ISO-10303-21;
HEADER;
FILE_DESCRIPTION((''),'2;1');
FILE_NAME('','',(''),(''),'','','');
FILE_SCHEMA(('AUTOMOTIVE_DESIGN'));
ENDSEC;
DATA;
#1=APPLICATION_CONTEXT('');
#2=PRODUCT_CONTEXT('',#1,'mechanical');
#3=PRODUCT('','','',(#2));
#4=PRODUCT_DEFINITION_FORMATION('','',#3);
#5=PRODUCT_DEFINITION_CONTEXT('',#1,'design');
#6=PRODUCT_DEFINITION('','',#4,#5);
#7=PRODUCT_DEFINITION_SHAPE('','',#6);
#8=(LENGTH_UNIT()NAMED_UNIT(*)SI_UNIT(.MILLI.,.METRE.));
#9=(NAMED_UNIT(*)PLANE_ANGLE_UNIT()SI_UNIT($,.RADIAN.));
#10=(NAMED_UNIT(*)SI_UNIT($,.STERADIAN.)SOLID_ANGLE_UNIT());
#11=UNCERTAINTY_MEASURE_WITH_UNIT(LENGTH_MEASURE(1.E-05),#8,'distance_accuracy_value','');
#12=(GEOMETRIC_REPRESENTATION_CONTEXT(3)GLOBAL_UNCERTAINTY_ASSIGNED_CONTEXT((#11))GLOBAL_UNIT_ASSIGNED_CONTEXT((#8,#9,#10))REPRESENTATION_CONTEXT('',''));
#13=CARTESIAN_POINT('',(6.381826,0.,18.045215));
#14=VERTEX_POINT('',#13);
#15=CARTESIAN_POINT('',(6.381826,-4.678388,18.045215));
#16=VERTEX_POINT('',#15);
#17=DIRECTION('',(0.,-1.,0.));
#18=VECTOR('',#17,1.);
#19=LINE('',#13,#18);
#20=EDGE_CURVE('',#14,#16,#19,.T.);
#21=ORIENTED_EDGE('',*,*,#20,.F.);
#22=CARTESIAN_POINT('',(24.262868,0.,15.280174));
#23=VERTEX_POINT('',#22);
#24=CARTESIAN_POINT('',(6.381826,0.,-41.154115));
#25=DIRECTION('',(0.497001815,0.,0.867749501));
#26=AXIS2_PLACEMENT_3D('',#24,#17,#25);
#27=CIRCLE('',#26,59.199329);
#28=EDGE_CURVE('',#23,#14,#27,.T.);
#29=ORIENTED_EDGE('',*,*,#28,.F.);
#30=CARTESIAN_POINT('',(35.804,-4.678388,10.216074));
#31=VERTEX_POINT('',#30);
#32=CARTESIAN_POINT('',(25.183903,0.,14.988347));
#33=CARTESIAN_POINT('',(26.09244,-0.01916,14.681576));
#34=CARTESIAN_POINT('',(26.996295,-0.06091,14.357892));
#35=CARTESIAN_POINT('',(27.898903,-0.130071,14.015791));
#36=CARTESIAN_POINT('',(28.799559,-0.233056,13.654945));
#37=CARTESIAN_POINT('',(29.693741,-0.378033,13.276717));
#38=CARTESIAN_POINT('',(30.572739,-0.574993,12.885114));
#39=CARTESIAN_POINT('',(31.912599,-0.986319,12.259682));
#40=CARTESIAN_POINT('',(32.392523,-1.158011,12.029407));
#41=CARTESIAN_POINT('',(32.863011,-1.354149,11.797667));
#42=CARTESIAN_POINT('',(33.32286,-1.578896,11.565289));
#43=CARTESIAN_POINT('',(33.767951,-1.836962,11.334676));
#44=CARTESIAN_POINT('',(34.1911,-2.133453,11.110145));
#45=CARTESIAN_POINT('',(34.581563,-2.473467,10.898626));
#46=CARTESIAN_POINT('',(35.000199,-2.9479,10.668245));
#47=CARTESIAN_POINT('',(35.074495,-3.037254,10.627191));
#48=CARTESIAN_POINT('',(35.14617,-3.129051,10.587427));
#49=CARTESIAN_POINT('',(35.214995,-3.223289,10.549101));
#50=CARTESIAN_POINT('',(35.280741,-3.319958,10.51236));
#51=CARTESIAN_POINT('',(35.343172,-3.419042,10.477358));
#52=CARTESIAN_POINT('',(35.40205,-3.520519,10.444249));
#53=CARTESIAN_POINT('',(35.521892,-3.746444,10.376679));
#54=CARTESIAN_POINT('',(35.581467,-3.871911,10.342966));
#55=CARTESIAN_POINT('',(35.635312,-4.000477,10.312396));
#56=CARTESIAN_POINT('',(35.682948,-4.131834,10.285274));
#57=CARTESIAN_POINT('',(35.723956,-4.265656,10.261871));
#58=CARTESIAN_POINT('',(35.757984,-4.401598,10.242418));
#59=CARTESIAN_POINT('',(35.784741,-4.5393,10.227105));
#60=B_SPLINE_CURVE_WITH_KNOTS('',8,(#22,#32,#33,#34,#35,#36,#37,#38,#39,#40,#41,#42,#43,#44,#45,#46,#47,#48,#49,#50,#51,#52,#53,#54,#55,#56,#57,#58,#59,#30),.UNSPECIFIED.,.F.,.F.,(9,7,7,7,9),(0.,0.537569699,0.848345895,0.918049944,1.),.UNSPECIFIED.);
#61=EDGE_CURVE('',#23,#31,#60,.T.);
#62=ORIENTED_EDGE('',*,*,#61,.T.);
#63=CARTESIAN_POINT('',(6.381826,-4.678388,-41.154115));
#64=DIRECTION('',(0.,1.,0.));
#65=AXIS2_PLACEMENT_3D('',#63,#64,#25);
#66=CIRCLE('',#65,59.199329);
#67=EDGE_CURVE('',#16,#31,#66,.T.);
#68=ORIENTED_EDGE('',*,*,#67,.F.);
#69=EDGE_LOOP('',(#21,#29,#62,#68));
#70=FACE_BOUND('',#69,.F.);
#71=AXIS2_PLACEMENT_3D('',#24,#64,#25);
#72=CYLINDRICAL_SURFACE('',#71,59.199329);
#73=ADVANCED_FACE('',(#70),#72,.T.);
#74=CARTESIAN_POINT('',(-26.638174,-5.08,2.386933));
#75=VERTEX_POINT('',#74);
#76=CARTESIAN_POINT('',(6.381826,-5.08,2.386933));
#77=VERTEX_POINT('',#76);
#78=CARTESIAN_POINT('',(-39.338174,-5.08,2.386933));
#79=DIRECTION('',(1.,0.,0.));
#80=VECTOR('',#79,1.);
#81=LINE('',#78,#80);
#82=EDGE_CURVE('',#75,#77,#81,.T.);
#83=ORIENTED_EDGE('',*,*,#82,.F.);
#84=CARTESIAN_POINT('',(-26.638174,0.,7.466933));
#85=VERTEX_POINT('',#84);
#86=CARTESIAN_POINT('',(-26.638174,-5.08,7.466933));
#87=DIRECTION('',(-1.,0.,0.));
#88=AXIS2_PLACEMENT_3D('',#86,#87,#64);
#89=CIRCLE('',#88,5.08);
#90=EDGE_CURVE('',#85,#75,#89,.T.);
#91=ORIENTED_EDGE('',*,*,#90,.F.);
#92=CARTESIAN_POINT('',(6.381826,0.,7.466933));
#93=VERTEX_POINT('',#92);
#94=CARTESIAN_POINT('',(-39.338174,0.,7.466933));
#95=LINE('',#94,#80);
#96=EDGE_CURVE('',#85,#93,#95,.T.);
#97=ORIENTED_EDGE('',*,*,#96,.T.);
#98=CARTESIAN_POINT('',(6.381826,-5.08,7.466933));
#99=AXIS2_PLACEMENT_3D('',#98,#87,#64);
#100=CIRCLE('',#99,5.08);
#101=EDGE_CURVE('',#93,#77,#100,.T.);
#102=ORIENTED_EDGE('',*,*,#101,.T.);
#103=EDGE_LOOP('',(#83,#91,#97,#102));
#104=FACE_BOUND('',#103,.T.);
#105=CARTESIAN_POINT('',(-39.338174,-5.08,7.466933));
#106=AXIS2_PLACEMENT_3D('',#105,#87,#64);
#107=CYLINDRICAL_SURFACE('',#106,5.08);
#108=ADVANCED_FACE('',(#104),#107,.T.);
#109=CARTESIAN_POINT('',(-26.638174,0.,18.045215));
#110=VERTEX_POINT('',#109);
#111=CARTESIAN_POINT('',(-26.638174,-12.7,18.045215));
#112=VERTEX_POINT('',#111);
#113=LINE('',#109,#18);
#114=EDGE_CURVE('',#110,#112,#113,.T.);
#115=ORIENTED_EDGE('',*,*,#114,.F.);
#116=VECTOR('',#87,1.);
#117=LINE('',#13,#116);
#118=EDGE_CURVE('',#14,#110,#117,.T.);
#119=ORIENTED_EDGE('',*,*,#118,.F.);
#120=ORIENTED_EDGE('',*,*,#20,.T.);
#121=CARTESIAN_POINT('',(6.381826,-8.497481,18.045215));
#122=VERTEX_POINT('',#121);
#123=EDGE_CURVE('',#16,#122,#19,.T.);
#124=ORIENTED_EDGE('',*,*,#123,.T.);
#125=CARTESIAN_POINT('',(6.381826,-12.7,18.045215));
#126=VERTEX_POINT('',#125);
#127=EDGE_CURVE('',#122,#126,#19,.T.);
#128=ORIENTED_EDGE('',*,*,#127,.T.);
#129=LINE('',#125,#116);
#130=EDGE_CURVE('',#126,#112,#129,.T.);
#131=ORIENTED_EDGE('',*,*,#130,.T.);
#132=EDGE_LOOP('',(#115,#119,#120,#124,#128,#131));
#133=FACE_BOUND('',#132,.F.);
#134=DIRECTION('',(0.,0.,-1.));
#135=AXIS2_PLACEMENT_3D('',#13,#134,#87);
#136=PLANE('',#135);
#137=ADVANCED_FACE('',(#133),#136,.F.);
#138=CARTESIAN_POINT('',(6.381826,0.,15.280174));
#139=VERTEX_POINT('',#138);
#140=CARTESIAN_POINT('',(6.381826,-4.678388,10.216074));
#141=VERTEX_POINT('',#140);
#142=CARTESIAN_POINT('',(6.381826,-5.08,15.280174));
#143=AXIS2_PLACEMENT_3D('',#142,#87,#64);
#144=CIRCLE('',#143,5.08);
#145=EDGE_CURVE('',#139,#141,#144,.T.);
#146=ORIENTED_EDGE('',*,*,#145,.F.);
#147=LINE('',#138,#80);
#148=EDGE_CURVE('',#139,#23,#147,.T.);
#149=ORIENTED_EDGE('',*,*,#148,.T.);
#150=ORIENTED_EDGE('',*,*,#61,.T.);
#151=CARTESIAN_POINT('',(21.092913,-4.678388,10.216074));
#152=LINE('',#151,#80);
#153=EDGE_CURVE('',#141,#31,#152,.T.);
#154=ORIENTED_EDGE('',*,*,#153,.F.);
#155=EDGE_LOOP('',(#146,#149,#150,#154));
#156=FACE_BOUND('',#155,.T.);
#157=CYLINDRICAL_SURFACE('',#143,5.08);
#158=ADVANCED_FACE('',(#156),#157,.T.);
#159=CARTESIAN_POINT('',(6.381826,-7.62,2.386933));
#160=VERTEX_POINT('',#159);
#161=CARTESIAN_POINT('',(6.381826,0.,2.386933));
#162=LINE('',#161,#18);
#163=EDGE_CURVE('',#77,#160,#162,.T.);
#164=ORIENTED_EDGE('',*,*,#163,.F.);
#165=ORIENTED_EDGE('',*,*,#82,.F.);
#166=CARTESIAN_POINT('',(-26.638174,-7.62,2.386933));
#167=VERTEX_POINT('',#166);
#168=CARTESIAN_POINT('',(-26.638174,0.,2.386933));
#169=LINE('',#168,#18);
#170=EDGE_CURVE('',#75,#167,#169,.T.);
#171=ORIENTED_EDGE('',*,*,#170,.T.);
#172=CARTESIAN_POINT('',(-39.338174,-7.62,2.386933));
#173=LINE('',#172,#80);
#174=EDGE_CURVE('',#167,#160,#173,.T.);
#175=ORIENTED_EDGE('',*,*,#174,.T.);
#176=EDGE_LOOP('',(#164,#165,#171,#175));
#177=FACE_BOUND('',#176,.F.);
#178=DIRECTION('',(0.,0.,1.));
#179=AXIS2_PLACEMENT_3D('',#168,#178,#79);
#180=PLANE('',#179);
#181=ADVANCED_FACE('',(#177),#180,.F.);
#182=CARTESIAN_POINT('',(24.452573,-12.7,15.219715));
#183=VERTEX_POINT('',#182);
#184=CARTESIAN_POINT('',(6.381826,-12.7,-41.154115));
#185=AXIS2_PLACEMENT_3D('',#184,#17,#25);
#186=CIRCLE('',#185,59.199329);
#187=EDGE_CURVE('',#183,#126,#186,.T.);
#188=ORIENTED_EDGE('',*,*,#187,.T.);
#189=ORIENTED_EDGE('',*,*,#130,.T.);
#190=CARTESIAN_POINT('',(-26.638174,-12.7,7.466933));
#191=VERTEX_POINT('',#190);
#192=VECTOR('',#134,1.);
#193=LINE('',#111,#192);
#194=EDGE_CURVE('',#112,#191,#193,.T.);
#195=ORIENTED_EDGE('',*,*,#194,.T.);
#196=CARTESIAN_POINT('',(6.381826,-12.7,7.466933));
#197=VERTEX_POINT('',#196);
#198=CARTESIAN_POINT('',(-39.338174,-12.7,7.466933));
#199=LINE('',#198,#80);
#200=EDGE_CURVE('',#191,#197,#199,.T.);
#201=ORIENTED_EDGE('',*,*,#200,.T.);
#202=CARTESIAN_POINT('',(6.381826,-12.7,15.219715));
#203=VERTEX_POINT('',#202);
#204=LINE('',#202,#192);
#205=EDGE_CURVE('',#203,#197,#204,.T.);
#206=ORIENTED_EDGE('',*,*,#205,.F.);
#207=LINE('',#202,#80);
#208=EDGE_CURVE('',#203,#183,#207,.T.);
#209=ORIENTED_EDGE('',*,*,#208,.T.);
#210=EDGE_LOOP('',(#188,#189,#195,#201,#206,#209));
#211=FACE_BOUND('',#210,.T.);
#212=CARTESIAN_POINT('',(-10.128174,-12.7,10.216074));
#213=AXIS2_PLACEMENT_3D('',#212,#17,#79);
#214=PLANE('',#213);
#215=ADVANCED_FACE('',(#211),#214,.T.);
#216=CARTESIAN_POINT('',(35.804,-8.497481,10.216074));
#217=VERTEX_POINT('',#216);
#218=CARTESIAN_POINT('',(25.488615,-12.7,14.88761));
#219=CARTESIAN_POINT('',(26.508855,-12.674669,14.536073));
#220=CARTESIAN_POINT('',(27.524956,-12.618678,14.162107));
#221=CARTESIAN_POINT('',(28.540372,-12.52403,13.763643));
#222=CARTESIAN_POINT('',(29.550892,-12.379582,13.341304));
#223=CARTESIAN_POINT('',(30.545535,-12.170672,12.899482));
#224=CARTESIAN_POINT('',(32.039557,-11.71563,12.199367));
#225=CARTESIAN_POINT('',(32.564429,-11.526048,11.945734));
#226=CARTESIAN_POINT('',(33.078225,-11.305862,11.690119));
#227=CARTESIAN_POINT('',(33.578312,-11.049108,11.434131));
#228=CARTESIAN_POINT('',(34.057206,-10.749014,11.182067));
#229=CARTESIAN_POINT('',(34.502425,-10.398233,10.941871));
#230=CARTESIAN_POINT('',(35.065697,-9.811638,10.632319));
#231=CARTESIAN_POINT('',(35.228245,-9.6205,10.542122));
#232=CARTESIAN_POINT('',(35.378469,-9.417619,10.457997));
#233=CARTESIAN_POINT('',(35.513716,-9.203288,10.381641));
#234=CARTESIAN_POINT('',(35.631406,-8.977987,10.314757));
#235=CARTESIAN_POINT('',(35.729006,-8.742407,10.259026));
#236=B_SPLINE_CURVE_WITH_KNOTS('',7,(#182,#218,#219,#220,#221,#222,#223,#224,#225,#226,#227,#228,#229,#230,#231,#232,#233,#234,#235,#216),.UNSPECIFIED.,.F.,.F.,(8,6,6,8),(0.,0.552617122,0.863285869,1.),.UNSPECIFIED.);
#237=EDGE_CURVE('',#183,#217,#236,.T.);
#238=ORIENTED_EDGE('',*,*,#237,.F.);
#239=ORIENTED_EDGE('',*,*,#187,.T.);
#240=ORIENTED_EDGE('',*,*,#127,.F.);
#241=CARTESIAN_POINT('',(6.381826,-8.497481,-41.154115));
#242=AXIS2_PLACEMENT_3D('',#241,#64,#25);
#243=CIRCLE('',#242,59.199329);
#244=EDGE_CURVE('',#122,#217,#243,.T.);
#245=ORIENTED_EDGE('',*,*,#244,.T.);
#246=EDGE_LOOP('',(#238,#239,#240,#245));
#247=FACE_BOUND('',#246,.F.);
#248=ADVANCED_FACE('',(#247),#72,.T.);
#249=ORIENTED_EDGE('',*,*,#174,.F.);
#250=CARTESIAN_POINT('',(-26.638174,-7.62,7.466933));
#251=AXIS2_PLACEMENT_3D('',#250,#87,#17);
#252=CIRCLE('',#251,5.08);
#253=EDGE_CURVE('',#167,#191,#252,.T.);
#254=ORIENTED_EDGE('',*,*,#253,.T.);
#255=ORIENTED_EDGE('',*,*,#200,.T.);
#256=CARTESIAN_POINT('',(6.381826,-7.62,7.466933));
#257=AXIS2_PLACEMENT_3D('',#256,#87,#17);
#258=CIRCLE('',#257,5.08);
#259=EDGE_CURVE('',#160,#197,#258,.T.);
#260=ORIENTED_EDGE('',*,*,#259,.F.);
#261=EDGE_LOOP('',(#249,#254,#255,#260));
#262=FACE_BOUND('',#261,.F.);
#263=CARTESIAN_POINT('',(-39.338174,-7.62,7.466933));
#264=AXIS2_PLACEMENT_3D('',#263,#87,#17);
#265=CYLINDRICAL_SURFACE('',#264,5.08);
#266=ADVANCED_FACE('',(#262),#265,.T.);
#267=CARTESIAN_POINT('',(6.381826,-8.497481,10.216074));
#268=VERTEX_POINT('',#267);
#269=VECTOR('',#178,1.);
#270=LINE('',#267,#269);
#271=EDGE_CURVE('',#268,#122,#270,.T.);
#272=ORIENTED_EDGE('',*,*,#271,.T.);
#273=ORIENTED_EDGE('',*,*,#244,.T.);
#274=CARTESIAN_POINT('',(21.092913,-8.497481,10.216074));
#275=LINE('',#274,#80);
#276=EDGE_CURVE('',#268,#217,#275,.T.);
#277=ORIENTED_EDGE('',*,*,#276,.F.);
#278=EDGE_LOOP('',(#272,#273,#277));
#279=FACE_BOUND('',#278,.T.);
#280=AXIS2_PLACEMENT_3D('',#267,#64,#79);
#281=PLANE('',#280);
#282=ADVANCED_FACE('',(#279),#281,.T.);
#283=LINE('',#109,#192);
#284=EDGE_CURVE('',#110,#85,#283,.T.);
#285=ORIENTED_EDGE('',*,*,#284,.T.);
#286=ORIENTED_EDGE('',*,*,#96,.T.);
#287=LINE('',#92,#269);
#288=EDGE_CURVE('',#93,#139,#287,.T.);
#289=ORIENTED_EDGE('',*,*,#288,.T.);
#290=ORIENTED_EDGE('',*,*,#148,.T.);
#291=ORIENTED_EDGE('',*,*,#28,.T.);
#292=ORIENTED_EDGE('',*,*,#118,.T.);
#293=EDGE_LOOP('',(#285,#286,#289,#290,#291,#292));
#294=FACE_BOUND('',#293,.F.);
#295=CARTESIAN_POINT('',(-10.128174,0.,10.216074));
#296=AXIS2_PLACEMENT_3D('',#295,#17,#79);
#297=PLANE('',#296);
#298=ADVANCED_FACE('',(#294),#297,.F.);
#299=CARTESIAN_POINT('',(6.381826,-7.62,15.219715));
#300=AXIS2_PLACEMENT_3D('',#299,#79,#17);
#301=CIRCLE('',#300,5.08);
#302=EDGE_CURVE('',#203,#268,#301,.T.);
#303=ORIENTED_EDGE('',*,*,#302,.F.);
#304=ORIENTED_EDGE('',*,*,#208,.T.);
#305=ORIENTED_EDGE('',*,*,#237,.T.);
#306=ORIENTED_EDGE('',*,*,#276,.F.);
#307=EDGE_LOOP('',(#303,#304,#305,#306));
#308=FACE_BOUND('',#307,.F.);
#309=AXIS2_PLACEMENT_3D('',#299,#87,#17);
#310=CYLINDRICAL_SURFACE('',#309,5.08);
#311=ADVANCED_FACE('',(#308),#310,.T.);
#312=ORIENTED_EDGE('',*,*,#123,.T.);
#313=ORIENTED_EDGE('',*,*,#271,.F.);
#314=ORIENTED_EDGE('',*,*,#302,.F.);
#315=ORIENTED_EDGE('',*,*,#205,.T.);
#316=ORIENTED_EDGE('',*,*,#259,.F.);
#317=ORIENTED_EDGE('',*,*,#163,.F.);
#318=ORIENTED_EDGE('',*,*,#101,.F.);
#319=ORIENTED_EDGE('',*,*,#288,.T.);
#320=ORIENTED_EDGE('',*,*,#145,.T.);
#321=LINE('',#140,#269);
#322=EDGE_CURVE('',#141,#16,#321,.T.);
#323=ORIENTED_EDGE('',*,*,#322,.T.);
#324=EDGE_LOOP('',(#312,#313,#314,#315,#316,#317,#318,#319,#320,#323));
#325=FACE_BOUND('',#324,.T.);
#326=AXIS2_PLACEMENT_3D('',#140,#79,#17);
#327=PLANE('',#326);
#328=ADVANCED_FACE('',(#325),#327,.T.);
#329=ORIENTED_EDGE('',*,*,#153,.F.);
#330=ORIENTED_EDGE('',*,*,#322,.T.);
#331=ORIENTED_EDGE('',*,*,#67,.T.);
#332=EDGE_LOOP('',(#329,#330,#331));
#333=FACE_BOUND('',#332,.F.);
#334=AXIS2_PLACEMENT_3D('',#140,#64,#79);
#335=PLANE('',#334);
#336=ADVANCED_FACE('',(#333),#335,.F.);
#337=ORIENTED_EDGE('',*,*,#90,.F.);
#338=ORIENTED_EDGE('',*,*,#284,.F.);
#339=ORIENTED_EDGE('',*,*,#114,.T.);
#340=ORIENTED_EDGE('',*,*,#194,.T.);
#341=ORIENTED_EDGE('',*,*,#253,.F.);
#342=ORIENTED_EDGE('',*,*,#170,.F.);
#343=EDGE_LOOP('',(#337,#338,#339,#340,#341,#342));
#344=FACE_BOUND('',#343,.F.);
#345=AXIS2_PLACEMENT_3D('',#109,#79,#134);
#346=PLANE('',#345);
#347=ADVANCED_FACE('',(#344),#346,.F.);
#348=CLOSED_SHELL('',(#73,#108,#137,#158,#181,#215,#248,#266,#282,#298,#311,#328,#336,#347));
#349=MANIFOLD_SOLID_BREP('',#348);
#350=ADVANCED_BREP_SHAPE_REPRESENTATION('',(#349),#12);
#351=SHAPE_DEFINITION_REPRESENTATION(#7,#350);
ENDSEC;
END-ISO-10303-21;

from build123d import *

# Parameters (mm, degrees)
F1_DEPTH    = 12.7
F2_W        = 29.4221741813
F2_H        = 3.8190931082
F3_DEPTH    = 25.4
F4_T1_DEPTH = 58.42
F4_T3_DEPTH = 41.9312775373
F4_T5_DEPTH = 42.0824239574


# Not quite as in the source:
# - a fillet or chamfer that OpenCascade refuses, or shapes differently, is made with other operations: its cross-section is extruded or revolved along the edge and cut away or added


with BuildPart() as f1:
    # F0 (on Front) → F1 (new body)
    with BuildSketch(Plane.XZ):
        Polygon((6.3818255705, 18.0452149361), (-26.6381744295, 18.0452149361), (-26.6381744295, 2.3869331926), (6.3818255705, 2.3869331926), (6.3818255705, 10.2160740644), align=None)
        with BuildLine():
            ThreePointArc((35.8039997518, 10.2160740644), (21.6048326678, 16.0544570681), (6.3818255705, 18.0452149361))
            Line((6.3818255705, 18.0452149361), (6.3818255705, 10.2160740644))
            Line((6.3818255705, 10.2160740644), (35.8039997518, 10.2160740644))
        make_face()
    extrude(amount=F1_DEPTH)

    # F2 (on face) → F3 (cut)
    with BuildSketch(Plane(origin=(0, 0, 10.2160740644), x_dir=(1, 0, 0), z_dir=(0, 0, -1))):
        with Locations((21.0929126611, 6.5879346803)):
            Rectangle(F2_W, F2_H)
    extrude(amount=-F3_DEPTH, mode=Mode.SUBTRACT)

    # F4: fillet of radius 5.08 on 4 edges, made by hand

    # F4_s2 → F4_t1 (cut)
    with BuildSketch(Plane.YZ.offset(-39.3381744295)):
        with BuildLine():
            ThreePointArc((-12.7, 7.4669331926), (-11.2121024484, 3.8748307442), (-7.62, 2.3869331926))
            Line((-7.62, 2.3869331926), (-12.7, 2.3869331926))
            Line((-12.7, 2.3869331926), (-12.7, 7.4669331926))
        make_face()
        with BuildLine():
            ThreePointArc((0, 7.4669331926), (-1.4878975516, 3.8748307442), (-5.08, 2.3869331926))
            Line((-5.08, 2.3869331926), (0, 2.3869331926))
            Line((0, 2.3869331926), (0, 7.4669331926))
        make_face()
    extrude(amount=F4_T1_DEPTH, mode=Mode.SUBTRACT)

    # F4_s4 → F4_t3 (cut)
    with BuildSketch(Plane.YZ.offset(6.3818255705)):
        with BuildLine():
            ThreePointArc((-12.7, 15.2197154068), (-11.5099874467, 11.9525457349), (-8.4974812344, 10.2160740644))
            Line((-8.4974812344, 10.2160740644), (-12.7, 10.2160740644))
            Line((-12.7, 10.2160740644), (-12.7, 15.2197154068))
        make_face()
    extrude(amount=F4_T3_DEPTH, mode=Mode.SUBTRACT)

    # F4_s6 → F4_t5 (cut)
    with BuildSketch(Plane.YZ.offset(6.3818255705)):
        with BuildLine():
            ThreePointArc((0, 15.2801739748), (-1.3486069412, 11.8329858685), (-4.6783881262, 10.2160740644))
            Line((-4.6783881262, 10.2160740644), (0, 10.2160740644))
            Line((0, 10.2160740644), (0, 15.2801739748))
        make_face()
    extrude(amount=F4_T5_DEPTH, mode=Mode.SUBTRACT)


solid = f1.part
